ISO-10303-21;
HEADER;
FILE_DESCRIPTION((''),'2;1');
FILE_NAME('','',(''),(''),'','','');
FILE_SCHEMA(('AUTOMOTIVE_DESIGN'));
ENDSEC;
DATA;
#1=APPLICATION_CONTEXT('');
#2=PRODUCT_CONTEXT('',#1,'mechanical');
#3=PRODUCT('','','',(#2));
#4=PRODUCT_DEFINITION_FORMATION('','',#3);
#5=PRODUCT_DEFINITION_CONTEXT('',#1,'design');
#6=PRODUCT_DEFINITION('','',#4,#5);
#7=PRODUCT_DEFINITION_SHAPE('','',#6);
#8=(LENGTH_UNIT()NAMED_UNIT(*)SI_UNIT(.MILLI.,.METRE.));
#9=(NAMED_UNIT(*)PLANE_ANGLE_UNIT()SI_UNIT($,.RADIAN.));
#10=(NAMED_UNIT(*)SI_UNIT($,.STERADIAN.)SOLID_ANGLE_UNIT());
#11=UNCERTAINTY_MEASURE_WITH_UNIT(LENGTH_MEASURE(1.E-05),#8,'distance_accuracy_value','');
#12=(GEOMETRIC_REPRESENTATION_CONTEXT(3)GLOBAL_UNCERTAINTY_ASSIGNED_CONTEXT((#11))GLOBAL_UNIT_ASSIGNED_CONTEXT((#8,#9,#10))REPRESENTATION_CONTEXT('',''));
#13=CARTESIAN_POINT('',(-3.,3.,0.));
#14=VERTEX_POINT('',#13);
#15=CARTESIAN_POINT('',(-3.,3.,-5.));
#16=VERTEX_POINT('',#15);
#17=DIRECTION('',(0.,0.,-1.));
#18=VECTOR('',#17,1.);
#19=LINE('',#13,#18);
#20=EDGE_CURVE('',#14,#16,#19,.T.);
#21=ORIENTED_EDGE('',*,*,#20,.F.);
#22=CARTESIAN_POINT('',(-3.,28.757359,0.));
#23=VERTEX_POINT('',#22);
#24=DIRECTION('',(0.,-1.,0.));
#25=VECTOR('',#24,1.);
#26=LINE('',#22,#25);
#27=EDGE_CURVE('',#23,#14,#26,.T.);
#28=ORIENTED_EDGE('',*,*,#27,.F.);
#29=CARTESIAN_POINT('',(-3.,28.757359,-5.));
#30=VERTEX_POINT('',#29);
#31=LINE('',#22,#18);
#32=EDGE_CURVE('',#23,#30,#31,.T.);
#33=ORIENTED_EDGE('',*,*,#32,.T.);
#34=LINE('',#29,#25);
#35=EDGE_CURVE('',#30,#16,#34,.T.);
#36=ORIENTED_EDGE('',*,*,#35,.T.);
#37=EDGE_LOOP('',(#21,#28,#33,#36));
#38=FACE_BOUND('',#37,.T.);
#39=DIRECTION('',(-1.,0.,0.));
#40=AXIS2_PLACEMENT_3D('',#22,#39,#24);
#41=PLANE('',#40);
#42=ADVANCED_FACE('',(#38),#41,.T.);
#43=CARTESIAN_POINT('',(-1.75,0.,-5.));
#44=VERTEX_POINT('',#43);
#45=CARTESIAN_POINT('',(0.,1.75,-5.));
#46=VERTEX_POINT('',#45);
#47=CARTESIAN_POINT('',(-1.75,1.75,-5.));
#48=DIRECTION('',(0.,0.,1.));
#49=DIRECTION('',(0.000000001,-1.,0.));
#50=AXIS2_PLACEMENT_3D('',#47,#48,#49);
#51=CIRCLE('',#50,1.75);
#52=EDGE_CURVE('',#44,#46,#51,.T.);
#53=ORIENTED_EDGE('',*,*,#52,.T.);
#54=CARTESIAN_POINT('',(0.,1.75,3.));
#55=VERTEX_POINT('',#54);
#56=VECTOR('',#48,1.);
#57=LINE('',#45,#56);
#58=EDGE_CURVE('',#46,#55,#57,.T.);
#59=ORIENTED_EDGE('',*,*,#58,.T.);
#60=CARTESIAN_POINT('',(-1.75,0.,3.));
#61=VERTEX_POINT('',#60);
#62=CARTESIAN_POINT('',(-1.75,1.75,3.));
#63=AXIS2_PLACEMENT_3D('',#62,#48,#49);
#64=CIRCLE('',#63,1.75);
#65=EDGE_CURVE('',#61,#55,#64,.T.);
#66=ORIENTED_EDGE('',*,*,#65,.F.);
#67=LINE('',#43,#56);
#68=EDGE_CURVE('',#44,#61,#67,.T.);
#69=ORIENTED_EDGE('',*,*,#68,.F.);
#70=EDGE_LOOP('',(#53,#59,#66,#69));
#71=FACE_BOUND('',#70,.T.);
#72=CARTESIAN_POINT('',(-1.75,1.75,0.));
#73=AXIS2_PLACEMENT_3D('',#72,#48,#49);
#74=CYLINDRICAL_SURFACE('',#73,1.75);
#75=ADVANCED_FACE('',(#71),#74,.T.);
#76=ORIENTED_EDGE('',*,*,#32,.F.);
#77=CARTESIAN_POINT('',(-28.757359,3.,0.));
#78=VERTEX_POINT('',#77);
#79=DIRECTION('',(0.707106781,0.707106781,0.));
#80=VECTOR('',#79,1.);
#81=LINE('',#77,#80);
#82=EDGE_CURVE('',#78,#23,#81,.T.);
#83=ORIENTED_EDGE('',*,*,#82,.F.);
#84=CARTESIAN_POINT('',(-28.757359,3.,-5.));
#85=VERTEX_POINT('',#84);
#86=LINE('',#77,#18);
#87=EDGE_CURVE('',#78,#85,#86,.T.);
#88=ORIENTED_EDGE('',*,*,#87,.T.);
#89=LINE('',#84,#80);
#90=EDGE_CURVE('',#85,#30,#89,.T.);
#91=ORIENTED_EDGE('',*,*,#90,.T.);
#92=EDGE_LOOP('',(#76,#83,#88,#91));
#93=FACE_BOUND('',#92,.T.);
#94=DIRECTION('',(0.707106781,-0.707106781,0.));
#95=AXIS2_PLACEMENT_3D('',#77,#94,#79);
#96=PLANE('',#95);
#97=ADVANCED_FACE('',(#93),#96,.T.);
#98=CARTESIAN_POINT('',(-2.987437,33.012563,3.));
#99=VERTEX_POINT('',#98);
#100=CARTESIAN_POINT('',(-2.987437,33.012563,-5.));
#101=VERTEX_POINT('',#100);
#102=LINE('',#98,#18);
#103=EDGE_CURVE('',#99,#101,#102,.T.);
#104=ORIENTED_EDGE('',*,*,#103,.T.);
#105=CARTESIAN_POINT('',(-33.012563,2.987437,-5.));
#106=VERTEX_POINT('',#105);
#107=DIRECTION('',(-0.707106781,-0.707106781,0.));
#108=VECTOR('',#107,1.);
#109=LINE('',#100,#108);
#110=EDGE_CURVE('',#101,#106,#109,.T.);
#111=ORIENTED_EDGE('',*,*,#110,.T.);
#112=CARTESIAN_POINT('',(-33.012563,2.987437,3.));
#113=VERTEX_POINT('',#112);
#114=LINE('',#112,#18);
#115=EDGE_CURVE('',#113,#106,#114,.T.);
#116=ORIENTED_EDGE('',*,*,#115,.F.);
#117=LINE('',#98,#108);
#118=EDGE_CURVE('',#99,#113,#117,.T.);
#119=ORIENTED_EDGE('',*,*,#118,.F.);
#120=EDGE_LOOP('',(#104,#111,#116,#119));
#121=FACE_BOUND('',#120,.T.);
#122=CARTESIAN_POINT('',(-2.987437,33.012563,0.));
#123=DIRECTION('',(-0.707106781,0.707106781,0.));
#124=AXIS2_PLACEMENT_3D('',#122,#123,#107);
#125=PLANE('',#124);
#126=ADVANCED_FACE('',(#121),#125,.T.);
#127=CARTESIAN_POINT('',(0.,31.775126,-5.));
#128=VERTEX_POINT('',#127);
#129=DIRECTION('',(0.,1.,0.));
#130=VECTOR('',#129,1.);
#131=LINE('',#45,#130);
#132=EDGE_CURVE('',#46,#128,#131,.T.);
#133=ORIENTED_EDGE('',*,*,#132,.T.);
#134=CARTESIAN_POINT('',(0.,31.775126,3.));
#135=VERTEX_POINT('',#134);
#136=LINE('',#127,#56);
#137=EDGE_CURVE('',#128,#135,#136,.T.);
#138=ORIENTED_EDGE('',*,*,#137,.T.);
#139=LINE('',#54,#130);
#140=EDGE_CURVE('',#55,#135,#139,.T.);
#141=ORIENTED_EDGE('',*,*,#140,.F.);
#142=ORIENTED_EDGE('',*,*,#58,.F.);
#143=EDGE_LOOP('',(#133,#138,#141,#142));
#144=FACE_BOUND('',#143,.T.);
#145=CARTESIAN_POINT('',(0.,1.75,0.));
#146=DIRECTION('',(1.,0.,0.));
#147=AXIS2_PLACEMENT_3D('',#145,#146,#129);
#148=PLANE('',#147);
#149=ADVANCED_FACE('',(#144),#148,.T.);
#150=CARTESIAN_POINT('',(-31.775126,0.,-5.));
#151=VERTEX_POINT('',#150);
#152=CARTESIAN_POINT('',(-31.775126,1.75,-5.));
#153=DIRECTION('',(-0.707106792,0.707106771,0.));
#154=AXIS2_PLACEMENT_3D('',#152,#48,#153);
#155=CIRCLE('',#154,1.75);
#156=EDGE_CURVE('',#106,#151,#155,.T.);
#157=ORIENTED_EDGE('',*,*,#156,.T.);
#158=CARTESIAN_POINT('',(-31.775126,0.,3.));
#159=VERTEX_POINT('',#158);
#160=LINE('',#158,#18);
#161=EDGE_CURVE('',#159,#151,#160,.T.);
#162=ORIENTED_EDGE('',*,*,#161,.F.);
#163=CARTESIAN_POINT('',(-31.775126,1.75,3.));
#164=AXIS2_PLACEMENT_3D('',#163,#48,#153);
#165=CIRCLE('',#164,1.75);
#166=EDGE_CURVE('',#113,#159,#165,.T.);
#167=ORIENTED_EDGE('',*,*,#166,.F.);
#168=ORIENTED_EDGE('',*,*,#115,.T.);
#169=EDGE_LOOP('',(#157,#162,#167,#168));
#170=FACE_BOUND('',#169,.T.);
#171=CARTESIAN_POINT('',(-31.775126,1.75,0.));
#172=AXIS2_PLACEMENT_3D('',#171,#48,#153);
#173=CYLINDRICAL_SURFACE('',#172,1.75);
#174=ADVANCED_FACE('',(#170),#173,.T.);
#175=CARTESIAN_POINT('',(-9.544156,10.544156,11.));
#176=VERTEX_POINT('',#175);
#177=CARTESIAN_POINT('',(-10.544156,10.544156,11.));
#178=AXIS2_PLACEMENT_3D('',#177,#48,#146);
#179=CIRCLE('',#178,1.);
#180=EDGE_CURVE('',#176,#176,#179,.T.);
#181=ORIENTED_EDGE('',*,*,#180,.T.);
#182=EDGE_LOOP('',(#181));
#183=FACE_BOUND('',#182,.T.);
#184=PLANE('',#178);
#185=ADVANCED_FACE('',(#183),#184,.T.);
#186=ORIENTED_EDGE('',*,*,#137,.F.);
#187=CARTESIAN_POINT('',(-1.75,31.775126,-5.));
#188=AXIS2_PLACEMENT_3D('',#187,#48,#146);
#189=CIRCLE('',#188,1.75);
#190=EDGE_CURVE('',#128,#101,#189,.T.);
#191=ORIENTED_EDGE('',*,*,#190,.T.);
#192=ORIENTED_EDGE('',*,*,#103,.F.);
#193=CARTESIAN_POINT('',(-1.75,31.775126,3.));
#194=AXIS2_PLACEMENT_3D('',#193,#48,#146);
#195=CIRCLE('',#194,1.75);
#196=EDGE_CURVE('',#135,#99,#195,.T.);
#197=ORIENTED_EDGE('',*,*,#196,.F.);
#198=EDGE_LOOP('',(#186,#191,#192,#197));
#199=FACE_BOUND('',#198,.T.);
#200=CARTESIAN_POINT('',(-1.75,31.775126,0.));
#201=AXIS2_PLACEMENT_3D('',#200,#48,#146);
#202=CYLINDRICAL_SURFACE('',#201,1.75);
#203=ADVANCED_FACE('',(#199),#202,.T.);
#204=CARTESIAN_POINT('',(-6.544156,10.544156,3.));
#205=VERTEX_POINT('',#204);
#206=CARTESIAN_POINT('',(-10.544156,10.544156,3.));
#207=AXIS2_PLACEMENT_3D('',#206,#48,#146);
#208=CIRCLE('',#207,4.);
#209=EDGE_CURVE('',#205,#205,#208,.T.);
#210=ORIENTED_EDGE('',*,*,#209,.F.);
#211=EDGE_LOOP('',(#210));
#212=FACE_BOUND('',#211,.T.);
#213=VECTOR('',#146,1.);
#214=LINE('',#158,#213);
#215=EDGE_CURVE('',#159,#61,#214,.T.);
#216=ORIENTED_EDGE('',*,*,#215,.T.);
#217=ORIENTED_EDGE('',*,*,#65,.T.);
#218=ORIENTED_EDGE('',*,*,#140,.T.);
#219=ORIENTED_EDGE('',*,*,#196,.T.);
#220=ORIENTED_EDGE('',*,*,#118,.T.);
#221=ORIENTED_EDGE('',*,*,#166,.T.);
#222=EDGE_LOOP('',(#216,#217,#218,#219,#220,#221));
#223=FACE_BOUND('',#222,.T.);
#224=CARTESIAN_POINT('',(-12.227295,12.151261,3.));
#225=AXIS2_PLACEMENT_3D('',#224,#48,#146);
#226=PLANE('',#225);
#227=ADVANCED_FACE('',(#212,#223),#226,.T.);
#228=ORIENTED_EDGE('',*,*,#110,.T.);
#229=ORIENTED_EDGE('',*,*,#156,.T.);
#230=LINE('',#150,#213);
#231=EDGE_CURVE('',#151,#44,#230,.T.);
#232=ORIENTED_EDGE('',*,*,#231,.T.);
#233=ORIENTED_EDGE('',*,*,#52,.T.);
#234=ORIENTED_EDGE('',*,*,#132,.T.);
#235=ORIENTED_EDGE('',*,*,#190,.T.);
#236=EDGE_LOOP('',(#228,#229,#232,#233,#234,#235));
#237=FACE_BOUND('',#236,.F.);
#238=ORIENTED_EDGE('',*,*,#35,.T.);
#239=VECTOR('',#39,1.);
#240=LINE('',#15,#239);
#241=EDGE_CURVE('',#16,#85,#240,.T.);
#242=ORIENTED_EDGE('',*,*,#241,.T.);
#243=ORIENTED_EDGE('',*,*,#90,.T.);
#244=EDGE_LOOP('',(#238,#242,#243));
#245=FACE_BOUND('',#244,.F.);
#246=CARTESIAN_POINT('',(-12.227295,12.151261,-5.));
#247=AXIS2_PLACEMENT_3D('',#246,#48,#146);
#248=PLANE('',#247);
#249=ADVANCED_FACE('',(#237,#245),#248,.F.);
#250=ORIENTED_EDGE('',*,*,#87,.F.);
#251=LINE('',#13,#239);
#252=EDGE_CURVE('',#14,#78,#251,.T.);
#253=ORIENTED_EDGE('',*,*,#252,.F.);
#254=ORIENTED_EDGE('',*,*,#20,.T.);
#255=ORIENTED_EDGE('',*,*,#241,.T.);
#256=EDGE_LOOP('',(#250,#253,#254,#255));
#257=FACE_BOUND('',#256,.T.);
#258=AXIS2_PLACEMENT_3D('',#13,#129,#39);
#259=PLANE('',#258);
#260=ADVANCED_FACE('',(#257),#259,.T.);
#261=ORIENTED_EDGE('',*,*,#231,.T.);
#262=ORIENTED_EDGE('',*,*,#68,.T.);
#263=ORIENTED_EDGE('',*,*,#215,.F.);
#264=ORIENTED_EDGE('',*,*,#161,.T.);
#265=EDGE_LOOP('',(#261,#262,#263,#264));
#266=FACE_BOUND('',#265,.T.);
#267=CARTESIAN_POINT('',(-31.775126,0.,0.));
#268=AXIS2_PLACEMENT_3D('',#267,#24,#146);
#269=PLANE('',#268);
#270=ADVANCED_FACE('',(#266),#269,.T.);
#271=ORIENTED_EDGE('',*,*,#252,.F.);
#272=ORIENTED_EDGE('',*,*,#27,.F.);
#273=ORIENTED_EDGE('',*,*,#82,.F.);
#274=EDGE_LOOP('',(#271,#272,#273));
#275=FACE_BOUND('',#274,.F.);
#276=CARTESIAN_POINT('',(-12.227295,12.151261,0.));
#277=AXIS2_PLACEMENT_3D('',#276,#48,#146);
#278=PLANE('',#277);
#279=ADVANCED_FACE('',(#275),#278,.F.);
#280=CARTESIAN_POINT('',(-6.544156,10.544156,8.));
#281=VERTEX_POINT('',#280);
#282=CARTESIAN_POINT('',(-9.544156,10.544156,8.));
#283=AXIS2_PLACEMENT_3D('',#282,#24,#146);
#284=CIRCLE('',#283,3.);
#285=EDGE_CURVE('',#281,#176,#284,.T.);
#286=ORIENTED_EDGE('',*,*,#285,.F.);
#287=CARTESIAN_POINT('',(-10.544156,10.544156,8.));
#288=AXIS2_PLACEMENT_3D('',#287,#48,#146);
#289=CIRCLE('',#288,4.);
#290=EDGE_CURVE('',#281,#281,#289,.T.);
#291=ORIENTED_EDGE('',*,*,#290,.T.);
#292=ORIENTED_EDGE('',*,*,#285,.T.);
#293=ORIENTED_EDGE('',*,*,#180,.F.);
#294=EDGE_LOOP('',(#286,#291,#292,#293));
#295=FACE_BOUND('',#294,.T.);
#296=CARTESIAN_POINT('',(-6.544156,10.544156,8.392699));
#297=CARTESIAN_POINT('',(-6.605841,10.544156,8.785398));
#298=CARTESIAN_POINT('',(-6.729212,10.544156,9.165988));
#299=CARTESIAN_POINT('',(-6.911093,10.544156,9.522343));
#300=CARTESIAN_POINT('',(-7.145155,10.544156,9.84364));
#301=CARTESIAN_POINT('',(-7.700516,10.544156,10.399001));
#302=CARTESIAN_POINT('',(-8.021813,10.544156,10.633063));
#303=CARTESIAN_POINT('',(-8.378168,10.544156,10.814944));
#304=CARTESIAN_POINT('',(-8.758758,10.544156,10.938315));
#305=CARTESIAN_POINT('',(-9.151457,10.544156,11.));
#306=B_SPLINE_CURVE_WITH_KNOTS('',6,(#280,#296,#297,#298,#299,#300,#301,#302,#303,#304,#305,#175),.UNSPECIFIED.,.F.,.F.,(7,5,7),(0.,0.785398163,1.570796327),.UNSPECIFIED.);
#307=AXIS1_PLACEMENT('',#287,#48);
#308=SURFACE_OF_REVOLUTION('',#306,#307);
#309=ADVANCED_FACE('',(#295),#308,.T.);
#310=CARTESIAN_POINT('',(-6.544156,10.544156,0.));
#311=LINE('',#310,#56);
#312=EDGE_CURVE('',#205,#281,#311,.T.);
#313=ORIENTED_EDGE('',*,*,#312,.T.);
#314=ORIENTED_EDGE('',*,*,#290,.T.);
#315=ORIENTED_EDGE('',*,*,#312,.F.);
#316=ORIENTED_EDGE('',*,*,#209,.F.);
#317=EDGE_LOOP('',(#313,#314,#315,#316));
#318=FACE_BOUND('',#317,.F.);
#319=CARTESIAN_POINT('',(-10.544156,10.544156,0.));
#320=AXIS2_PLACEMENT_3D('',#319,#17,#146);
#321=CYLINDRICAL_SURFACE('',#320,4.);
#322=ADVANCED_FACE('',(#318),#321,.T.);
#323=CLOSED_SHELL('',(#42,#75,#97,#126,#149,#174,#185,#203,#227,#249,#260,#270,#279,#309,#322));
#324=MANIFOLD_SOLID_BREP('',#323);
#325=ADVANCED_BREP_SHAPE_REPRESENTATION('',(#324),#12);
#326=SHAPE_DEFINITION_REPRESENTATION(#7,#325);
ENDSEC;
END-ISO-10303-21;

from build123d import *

# Parameters (mm, degrees)
F0_R     = 4
F1_DEPTH = 11
F2_DEPTH = 3
F3_DEPTH = 5
F4_R     = 3


# Not quite as in the source:
# - a feature names something its author has since deleted; it is built from what else it names


with BuildPart() as f1:
    # F0 (on Top) → F1 (new body)
    with BuildSketch(Plane.XY):
        with Locations((-10.5441558773, 10.5441558773)):
            Circle(F0_R)
    extrude(amount=F1_DEPTH)

    # F0 (on Top) → F2 (join)
    with BuildSketch(Plane.XY):
        with BuildLine():
            ThreePointArc((-30.0251262658, 1.75), (-30.5376893988, 0.5125631329), (-31.7751262658, 0))
            Line((-31.7751262658, 0), (-1.7499999988, 0))
            ThreePointArc((-1.7499999988, 0), (-2.9874368675, 2.9874368666), (0, 1.75))
            Line((0, 1.75), (0, 31.7751262658))
            ThreePointArc((0, 31.7751262658), (-2.4196959983, 30.1583370805), (-2.9874368799, 33.0125631201))
            Line((-2.9874368799, 33.0125631201), (-33.0125631516, 2.9874368484))
            ThreePointArc((-33.0125631516, 2.9874368484), (-31.1054302714, 3.3667891869), (-30.0251262658, 1.75))
        make_face()
        Polygon((-3, 3), (-28.7573593129, 3), (-3, 28.7573593129), align=None, mode=Mode.SUBTRACT)
        Polygon((-3, 28.7573593129), (-28.7573593129, 3), (-3, 3), align=None)
        with Locations((-10.5441558773, 10.5441558773)):
            Circle(F0_R, mode=Mode.SUBTRACT)
        with BuildLine():
            ThreePointArc((-33.0125631516, 2.9874368484), (-33.3919154427, 1.0803039812), (-31.7751262658, 0))
            ThreePointArc((-31.7751262658, 0), (-30.5376893988, 0.5125631329), (-30.0251262658, 1.75))
            ThreePointArc((-30.0251262658, 1.75), (-31.1054302714, 3.3667891869), (-33.0125631516, 2.9874368484))
        make_face()
        with BuildLine():
            ThreePointArc((0, 1.75), (-2.9874368675, 2.9874368666), (-1.7499999988, 0))
            ThreePointArc((-1.7499999988, 0), (-0.5125631325, 0.5125631334), (0, 1.75))
        make_face()
        with BuildLine():
            ThreePointArc((0, 31.7751262658), (-1.0803040017, 33.3919154512), (-2.9874368799, 33.0125631201))
            ThreePointArc((-2.9874368799, 33.0125631201), (-2.4196959983, 30.1583370805), (0, 31.7751262658))
        make_face()
    extrude(amount=F2_DEPTH)

    # F0 (on Top) → F3 (join)
    with BuildSketch(Plane.XY):
        with BuildLine():
            ThreePointArc((-30.0251262658, 1.75), (-30.5376893988, 0.5125631329), (-31.7751262658, 0))
            Line((-31.7751262658, 0), (-1.7499999988, 0))
            ThreePointArc((-1.7499999988, 0), (-2.9874368675, 2.9874368666), (0, 1.75))
            Line((0, 1.75), (0, 31.7751262658))
            ThreePointArc((0, 31.7751262658), (-2.4196959983, 30.1583370805), (-2.9874368799, 33.0125631201))
            Line((-2.9874368799, 33.0125631201), (-33.0125631516, 2.9874368484))
            ThreePointArc((-33.0125631516, 2.9874368484), (-31.1054302714, 3.3667891869), (-30.0251262658, 1.75))
        make_face()
        Polygon((-3, 3), (-28.7573593129, 3), (-3, 28.7573593129), align=None, mode=Mode.SUBTRACT)
        with BuildLine():
            ThreePointArc((0, 1.75), (-2.9874368675, 2.9874368666), (-1.7499999988, 0))
            ThreePointArc((-1.7499999988, 0), (-0.5125631325, 0.5125631334), (0, 1.75))
        make_face()
        with BuildLine():
            ThreePointArc((0, 31.7751262658), (-1.0803040017, 33.3919154512), (-2.9874368799, 33.0125631201))
            ThreePointArc((-2.9874368799, 33.0125631201), (-2.4196959983, 30.1583370805), (0, 31.7751262658))
        make_face()
        with BuildLine():
            ThreePointArc((-33.0125631516, 2.9874368484), (-33.3919154427, 1.0803039812), (-31.7751262658, 0))
            ThreePointArc((-31.7751262658, 0), (-30.5376893988, 0.5125631329), (-30.0251262658, 1.75))
            ThreePointArc((-30.0251262658, 1.75), (-31.1054302714, 3.3667891869), (-33.0125631516, 2.9874368484))
        make_face()
    extrude(amount=-F3_DEPTH)

    # F4
    f4_edges = [f1.edges().sort_by_distance(p)[0] for p in [
        (-14.544156, 10.544156, 11),
    ]]
    fillet(f4_edges, radius=F4_R)


solid = f1.part
